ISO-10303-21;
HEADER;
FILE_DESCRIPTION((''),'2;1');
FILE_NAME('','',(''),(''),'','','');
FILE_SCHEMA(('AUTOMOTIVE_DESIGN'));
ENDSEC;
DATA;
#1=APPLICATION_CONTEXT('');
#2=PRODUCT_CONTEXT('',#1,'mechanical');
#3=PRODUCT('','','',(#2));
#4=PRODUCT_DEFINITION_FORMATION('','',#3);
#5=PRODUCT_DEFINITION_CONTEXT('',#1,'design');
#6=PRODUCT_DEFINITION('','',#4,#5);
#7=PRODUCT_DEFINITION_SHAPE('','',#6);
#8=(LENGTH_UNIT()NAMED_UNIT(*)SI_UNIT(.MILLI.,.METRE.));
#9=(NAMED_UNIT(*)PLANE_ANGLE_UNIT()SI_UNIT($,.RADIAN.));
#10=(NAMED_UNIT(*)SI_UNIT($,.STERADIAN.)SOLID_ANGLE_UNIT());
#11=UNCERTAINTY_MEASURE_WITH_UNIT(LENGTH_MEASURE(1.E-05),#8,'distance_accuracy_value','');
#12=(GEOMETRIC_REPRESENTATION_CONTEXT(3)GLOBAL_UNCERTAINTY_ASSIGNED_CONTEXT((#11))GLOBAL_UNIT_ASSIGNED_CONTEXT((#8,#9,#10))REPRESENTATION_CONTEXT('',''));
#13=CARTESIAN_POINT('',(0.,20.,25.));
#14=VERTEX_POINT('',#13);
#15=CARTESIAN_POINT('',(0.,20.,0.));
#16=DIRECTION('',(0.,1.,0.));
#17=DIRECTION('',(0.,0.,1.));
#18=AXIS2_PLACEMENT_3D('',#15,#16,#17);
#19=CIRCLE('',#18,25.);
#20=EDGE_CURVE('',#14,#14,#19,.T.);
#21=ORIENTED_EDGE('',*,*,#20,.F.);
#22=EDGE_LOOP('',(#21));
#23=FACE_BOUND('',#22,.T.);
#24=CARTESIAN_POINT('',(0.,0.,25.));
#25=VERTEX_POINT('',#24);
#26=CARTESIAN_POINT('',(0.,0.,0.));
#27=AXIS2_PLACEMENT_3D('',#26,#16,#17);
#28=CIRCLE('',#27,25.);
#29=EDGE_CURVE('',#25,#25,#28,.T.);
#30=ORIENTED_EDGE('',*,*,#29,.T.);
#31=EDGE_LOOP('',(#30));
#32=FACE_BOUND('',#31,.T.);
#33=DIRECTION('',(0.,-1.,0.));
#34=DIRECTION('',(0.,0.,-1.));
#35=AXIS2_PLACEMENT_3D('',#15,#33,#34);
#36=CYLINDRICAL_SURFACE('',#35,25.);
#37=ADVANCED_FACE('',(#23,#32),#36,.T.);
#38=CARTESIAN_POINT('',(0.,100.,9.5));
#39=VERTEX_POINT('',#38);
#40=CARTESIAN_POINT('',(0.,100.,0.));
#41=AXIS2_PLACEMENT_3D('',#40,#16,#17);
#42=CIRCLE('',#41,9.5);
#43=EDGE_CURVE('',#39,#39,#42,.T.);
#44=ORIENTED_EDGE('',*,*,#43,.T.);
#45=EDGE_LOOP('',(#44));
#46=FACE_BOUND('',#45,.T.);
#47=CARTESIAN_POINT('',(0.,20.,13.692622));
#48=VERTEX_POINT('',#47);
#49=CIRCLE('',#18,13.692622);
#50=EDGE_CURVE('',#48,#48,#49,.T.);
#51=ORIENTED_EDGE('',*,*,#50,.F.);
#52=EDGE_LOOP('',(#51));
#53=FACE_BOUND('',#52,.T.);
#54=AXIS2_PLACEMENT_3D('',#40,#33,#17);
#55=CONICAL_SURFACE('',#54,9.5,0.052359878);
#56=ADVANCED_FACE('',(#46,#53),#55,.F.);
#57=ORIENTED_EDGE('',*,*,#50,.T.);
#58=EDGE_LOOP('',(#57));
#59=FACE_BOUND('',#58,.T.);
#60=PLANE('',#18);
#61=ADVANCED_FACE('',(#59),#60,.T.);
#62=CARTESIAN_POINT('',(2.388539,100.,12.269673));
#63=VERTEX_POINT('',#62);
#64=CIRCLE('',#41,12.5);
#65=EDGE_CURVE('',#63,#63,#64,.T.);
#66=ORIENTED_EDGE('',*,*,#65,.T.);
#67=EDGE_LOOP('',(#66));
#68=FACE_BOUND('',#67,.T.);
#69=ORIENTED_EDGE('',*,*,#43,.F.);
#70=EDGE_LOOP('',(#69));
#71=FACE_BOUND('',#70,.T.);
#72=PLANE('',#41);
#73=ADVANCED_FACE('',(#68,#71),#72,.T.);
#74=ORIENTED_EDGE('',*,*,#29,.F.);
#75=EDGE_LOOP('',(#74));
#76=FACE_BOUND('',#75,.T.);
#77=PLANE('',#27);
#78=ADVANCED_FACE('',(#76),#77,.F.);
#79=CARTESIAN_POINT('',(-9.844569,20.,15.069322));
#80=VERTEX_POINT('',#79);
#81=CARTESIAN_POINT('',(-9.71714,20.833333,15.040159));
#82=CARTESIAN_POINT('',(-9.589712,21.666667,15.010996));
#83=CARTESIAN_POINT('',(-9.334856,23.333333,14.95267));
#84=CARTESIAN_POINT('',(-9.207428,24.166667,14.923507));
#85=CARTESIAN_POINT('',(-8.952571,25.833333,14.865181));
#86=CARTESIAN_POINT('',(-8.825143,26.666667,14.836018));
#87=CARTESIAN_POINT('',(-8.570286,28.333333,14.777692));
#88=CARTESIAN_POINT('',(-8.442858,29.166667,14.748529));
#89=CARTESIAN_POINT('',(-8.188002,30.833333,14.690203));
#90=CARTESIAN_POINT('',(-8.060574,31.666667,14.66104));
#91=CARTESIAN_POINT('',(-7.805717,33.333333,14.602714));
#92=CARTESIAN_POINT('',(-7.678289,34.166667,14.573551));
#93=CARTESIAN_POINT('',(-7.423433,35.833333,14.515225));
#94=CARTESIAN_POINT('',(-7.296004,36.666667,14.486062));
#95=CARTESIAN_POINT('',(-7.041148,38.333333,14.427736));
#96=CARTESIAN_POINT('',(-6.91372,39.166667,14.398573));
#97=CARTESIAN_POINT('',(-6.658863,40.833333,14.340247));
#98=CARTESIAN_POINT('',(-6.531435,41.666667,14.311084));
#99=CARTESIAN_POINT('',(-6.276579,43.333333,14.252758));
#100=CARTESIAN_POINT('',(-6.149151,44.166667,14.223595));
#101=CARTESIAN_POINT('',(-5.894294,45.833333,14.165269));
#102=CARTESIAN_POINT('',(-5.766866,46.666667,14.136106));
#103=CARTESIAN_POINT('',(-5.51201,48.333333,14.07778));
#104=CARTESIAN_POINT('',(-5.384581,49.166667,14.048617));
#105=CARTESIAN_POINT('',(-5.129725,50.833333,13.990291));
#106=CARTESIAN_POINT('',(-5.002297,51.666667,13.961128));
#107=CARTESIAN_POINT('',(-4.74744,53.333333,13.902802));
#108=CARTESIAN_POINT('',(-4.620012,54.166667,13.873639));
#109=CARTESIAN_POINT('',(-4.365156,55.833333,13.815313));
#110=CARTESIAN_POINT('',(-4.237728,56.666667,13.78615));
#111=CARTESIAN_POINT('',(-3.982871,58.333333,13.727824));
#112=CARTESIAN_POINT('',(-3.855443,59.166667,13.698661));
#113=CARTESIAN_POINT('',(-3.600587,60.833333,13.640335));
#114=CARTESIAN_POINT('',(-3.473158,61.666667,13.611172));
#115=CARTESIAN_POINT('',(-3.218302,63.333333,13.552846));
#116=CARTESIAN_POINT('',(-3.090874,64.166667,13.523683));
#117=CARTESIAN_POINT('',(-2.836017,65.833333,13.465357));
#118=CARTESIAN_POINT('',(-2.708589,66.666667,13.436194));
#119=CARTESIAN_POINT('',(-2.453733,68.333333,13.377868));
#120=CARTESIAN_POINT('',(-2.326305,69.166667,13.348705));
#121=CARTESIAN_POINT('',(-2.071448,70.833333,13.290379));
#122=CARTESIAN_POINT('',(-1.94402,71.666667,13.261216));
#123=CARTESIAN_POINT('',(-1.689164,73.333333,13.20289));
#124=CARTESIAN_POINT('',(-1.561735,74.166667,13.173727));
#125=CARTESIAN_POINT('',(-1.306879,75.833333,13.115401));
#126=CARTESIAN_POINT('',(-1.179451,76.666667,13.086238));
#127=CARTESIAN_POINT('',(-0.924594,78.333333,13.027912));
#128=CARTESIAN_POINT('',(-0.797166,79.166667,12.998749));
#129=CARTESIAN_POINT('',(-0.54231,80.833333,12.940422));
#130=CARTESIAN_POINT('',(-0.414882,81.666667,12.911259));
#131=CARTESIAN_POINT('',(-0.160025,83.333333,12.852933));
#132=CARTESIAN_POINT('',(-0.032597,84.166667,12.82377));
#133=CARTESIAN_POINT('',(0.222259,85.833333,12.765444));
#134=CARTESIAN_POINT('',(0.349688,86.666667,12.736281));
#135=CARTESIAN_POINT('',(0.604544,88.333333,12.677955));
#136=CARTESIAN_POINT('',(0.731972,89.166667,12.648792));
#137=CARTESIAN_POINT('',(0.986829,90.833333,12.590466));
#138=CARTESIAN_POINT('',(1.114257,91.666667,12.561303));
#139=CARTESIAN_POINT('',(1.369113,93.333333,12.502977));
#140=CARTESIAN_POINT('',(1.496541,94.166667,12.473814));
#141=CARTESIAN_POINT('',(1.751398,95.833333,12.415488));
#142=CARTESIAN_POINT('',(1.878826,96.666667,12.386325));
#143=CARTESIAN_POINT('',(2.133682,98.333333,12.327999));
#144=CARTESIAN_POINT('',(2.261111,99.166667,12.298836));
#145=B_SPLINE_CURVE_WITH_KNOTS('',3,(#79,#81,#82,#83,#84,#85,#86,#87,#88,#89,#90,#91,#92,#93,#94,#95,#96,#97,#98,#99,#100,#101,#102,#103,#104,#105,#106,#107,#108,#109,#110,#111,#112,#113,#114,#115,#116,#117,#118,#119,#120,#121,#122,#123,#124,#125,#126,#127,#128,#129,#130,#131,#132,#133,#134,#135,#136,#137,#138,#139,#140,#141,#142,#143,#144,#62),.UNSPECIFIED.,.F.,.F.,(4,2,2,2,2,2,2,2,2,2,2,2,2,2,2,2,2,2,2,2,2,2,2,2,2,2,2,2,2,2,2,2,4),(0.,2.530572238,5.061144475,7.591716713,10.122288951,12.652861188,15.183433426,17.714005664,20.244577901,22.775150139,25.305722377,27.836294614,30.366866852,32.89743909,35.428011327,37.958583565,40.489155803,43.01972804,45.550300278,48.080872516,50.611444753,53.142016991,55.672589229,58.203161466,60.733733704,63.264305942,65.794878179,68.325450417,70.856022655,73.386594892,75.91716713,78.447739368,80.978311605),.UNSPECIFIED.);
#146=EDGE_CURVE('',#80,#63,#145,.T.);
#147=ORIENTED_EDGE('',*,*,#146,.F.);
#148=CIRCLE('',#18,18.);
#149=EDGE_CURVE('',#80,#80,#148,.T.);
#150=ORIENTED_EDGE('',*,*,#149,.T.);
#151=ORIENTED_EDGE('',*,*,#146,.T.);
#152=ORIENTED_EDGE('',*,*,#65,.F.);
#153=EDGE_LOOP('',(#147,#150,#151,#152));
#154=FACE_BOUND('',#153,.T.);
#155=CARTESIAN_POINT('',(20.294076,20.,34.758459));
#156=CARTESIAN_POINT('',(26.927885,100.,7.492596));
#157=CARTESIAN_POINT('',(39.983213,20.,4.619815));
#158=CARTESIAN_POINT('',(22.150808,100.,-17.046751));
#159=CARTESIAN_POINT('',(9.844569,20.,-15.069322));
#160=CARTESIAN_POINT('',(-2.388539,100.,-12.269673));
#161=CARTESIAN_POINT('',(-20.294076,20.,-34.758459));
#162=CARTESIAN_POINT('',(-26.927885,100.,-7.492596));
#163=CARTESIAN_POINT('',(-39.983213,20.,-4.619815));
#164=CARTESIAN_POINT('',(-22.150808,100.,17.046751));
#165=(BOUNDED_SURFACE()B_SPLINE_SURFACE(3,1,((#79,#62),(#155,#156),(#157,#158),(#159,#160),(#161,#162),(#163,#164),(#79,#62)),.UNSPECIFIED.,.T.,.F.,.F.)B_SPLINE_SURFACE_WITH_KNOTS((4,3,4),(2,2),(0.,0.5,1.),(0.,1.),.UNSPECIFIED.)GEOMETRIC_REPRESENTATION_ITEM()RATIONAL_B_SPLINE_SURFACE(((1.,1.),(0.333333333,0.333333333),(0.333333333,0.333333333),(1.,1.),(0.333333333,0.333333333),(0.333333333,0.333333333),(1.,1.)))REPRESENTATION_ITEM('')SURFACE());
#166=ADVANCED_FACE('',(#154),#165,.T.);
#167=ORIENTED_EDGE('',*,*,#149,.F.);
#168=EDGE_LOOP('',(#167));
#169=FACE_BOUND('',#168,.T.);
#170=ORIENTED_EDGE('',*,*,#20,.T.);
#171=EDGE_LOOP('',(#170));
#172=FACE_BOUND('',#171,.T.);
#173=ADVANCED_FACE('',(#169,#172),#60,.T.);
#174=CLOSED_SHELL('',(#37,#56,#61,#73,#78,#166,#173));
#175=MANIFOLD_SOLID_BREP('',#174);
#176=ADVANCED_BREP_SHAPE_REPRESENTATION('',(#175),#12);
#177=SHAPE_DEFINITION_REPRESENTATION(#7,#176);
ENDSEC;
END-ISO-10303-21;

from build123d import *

# Parameters (mm, degrees)
CROQUIS1_R              = 25
SALIENTE_EXTRUIR1_DEPTH = 20
CROQUIS5_R              = 9.5
CORTAR_EXTRUIR1_DEPTH   = 80
CORTAR_EXTRUIR1_DRAFT   = 3


with BuildPart() as part:
    # Croquis1 → Saliente-Extruir1 (new body)
    with BuildSketch(Plane(origin=(0, 0, 0), x_dir=(1, 0, 0), z_dir=(0, 1, 0))):
        with Locations(Location((0, 0, 0), (0, 0, 270))):
            Circle(CROQUIS1_R)
    extrude(amount=SALIENTE_EXTRUIR1_DEPTH)

    # Recubrir1: read off the stored shape, not the designer's step
    # Recubrir1: loft between two sections, ruled curve by curve
    recubrir1_from = [
        Edge.make_bspline([(-9.844568518, 20, 15.069322171), (20.294075824, 20, 34.758459207), (39.98321286, 20, 4.619814865), (9.844568518, 20, -15.069322171), (-20.294075824, 20, -34.758459207), (-39.98321286, 20, -4.619814865), (-9.844568518, 20, 15.069322171)], [0, 0, 0, 0, 0.5, 0.5, 0.5, 1, 1, 1, 1], 3, [1, 0.333333333, 0.333333333, 1, 0.333333333, 0.333333333, 1]),
    ]
    recubrir1_to = [
        Edge.make_bspline([(2.388538874, 100, 12.269673266), (26.927885406, 100, 7.492595517), (22.150807657, 100, -17.046751015), (-2.388538874, 100, -12.269673266), (-26.927885406, 100, -7.492595517), (-22.150807657, 100, 17.046751015), (2.388538874, 100, 12.269673266)], [0, 0, 0, 0, 0.5, 0.5, 0.5, 1, 1, 1, 1], 3, [1, 0.333333333, 0.333333333, 1, 0.333333333, 0.333333333, 1]),
    ]
    recubrir1 = Solid(Shell([*[Face.make_surface_from_curves(recubrir1_from[k], recubrir1_to[k]) for k in range(1)], Face(Wire(recubrir1_from)), Face(Wire(recubrir1_to))]))
    add(recubrir1)


with BuildPart() as cortar_extruir1_tool:
    # Croquis5 → Cortar-Extruir1 (with draft: the straight prism first)
    with BuildSketch(Plane(origin=(0, 100, 0), x_dir=(1, 0, 0), z_dir=(0, 1, 0))):
        Circle(CROQUIS5_R)
    extrude(amount=-CORTAR_EXTRUIR1_DEPTH)
    # Cortar-Extruir1: the draft: its side faces are tilted about the plane it starts from
    cortar_extruir1_sides = [cortar_extruir1_tool.faces().sort_by_distance(p)[0] for p in [
        (-9.5, 60, 0),
    ]]
    draft(cortar_extruir1_sides, Plane(origin=(0, 100, 0), x_dir=(1, 0, 0), z_dir=(0, 1, 0)), CORTAR_EXTRUIR1_DRAFT)


with BuildPart() as part_1:
    add(part.part)

    # Cortar-Extruir1: cut by cortar_extruir1_tool
    add(cortar_extruir1_tool.part, mode=Mode.SUBTRACT)


solid = part_1.part
